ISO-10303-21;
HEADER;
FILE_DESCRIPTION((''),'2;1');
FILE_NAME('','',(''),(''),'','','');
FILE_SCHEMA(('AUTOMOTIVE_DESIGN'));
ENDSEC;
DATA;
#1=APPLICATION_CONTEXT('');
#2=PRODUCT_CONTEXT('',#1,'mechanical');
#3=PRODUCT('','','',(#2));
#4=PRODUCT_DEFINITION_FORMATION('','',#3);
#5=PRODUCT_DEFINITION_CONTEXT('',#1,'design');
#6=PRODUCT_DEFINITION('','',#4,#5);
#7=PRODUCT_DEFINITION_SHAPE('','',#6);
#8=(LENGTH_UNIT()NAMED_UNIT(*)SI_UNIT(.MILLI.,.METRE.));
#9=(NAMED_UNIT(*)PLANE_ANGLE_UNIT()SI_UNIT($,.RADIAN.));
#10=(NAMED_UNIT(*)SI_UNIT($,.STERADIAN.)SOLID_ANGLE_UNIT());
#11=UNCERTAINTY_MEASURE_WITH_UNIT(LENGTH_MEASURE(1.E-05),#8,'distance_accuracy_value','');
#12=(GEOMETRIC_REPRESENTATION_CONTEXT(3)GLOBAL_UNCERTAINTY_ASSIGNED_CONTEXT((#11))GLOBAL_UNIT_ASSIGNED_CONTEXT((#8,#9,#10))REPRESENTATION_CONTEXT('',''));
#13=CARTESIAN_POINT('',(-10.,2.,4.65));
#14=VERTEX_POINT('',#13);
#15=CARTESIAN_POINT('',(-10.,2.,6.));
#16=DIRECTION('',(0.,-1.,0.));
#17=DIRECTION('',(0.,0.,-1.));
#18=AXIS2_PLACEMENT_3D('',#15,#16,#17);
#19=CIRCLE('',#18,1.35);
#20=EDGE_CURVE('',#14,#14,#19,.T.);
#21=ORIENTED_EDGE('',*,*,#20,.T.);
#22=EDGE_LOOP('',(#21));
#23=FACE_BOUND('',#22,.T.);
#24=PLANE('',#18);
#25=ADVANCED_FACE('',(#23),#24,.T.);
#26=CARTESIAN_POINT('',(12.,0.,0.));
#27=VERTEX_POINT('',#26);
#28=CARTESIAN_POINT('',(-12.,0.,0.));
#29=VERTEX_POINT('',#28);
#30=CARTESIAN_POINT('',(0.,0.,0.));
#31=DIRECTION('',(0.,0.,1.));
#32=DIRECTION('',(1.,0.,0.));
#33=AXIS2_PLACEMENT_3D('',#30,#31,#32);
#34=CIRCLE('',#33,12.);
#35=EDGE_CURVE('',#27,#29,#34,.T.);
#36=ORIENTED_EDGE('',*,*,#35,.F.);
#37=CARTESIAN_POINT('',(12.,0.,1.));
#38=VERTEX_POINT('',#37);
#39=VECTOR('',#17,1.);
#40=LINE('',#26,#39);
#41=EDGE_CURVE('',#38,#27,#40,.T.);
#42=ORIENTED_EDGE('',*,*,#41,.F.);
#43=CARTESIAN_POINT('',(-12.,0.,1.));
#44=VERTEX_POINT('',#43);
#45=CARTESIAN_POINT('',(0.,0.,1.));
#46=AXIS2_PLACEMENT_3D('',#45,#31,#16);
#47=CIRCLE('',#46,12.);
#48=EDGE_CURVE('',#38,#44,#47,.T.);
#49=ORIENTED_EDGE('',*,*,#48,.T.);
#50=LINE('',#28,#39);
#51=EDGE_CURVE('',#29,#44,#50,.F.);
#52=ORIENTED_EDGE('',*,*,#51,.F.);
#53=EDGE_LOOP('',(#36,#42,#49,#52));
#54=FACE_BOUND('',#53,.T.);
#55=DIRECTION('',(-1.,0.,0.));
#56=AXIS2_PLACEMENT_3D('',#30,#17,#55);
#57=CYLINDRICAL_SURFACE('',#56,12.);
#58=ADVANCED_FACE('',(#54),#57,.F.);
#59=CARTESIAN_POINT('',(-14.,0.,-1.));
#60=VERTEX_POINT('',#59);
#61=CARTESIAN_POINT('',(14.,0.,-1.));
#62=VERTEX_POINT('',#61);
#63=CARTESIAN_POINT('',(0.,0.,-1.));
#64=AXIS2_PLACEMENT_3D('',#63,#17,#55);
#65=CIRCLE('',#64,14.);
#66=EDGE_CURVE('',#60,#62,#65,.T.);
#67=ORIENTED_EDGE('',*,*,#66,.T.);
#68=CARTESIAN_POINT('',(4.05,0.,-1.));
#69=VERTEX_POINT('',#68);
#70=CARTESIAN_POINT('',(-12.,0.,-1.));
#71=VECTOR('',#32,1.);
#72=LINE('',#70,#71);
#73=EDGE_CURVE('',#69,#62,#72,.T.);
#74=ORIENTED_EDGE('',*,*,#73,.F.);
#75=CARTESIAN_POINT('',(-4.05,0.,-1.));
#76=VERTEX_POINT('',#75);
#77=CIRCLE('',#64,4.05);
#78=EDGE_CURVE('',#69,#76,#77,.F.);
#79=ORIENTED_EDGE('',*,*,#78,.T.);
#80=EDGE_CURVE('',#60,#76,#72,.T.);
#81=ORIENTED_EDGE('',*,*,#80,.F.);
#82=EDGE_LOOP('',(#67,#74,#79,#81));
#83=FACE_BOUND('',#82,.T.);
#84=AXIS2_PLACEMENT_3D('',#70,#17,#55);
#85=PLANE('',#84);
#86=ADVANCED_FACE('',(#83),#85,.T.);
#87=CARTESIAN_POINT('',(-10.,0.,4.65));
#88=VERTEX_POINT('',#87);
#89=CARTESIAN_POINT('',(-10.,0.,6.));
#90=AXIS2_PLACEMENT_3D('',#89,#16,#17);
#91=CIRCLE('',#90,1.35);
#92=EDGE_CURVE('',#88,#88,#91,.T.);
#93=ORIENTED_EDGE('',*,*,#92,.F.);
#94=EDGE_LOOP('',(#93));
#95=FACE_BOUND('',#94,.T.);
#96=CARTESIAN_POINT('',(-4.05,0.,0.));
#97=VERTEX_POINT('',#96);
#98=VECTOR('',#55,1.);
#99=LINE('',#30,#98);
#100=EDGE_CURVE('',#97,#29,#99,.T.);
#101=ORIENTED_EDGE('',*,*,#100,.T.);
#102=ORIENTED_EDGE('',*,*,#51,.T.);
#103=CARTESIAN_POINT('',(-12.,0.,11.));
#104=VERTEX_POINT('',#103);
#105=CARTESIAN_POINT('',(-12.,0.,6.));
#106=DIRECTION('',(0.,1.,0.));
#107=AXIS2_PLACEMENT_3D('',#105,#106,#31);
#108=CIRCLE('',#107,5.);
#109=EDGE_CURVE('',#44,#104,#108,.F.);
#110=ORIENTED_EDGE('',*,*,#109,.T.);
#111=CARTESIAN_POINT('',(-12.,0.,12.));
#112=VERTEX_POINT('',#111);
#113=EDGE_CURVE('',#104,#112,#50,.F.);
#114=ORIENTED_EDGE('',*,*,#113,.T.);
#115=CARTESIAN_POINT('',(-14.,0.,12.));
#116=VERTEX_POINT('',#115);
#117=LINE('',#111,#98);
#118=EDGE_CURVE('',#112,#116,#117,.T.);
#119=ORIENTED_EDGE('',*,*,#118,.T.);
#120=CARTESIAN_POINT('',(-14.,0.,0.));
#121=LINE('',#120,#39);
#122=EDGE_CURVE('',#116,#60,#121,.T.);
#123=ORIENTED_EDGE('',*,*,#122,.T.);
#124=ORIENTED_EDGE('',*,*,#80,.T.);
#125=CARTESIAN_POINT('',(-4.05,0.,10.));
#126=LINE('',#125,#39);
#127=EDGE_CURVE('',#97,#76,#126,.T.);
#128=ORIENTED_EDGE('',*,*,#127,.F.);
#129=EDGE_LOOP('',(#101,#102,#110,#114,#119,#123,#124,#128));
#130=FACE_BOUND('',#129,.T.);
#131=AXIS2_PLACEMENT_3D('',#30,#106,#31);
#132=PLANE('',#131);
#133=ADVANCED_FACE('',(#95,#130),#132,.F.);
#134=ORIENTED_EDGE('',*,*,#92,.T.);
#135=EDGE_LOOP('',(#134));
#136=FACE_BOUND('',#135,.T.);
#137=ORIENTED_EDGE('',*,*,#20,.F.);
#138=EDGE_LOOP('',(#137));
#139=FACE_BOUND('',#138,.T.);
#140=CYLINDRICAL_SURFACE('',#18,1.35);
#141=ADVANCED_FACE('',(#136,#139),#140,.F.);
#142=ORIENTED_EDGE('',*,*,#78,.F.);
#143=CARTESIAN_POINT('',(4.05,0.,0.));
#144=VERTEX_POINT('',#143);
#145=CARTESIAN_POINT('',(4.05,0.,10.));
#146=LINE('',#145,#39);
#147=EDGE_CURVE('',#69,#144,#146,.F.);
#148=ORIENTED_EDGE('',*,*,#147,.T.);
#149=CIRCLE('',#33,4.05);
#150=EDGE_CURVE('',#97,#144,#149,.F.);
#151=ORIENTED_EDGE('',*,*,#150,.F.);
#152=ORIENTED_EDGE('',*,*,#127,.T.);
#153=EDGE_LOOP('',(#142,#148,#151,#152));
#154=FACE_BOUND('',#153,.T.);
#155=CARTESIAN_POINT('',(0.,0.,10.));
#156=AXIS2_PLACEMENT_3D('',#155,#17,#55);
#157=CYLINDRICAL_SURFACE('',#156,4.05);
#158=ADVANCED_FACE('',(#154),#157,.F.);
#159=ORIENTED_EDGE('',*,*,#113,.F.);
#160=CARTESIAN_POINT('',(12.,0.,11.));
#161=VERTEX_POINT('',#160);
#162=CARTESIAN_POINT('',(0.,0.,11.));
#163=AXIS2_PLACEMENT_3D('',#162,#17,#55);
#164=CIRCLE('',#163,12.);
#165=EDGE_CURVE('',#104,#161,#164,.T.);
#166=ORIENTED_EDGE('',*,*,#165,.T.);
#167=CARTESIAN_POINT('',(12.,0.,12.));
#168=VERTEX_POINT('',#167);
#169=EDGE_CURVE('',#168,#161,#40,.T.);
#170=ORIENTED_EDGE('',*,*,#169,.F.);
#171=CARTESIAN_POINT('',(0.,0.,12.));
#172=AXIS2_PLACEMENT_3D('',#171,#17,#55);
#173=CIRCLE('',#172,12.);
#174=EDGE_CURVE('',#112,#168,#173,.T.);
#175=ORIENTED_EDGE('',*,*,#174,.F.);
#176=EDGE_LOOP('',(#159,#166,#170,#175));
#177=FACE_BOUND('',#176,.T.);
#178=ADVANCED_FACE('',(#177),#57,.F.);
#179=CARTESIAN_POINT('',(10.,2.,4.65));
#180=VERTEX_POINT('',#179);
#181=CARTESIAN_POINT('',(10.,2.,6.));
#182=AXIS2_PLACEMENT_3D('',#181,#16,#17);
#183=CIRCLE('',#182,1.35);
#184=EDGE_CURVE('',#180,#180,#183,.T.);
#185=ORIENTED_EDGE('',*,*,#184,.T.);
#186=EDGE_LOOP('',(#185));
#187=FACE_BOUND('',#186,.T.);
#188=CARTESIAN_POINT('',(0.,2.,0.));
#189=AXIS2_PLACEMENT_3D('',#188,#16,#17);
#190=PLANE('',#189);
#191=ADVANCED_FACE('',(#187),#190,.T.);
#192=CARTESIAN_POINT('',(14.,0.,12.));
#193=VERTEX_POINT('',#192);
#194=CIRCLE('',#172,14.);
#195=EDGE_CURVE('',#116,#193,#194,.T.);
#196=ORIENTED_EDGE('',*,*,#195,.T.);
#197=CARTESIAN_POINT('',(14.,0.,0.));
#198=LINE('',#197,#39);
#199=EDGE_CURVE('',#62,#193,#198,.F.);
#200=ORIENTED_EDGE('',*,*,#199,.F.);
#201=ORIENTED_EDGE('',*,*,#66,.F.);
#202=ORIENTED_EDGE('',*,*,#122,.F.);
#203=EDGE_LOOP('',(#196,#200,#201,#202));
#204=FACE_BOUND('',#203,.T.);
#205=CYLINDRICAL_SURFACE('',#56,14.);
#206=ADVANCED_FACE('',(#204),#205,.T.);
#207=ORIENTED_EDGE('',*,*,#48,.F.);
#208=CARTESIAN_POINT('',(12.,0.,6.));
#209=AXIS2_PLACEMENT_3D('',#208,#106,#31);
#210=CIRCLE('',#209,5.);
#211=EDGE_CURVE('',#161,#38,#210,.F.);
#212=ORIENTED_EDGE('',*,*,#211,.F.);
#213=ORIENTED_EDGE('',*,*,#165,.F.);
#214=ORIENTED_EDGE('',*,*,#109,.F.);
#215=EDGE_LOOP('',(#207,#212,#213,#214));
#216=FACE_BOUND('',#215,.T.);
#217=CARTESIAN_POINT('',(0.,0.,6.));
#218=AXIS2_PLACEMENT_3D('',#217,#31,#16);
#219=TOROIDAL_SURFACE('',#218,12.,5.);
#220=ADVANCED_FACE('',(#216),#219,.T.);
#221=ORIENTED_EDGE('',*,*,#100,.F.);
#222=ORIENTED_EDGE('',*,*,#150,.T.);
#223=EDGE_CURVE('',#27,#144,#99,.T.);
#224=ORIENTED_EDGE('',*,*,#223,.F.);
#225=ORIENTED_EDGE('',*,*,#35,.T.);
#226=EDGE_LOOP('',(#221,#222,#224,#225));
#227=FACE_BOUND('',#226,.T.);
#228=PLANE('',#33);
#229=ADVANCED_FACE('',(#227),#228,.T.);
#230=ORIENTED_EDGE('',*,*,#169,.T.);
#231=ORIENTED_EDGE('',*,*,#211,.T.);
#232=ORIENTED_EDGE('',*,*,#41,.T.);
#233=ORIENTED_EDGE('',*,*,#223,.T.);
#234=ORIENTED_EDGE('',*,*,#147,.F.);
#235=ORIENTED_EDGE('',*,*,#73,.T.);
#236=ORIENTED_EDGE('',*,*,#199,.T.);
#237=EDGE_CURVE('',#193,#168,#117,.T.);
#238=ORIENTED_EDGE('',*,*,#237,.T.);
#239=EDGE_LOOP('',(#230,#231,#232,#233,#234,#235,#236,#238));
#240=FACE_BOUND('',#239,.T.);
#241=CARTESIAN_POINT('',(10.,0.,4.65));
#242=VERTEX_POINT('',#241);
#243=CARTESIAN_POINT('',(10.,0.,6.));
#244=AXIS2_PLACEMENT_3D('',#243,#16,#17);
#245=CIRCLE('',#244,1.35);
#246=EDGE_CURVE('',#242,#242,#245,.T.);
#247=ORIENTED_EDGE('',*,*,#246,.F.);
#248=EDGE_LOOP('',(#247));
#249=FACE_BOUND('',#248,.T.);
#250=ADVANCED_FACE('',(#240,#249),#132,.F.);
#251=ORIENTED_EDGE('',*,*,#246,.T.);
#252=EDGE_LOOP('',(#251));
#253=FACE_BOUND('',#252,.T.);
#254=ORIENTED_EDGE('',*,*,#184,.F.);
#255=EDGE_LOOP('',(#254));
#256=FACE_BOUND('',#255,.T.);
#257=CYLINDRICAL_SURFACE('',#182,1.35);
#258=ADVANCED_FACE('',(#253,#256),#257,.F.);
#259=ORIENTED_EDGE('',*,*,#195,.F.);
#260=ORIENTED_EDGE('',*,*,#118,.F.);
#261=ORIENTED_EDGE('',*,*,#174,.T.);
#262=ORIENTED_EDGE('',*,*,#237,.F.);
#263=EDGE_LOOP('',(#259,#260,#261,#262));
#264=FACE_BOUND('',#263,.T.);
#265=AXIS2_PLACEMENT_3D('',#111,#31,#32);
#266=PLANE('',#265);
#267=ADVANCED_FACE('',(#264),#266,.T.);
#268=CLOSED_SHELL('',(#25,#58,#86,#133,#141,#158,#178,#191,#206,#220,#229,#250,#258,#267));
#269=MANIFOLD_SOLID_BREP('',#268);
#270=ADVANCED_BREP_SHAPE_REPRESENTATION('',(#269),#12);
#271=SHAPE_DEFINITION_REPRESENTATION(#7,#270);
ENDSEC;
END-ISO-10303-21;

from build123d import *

# Parameters (mm, degrees)
SKETCH_1_R               = 12
EXTRUDE_1_DEPTH          = 12
OTHER_1_2_OUTLINE_R      = 12
OTHER_1_2_OUTLINE_R_2    = 5
OTHER_1_2_DEPTH          = 12
OTHER_1_3_OUTLINE_R      = 5
OTHER_1_3_OUTLINE_R_2    = 4
OTHER_1_3_DEPTH          = 4
OTHER_START              = 8
OTHER_1_4_OUTLINE_R      = 5
OTHER_1_4_OUTLINE_R_2    = 4
OTHER_1_4_DEPTH          = 4
SKETCH_2_R               = 12
EXTRUDE_2_DEPTH          = 1
SKETCH_3_W               = 2
SKETCH_3_H               = 13
SKETCH_4_R               = 1
EXTRUDE_3_DEPTH          = 4
SKETCH_5_W               = 34.262916627
SKETCH_5_H               = 20.154656839
CUT_EXTRUDE_3_DEPTH      = 24.151673806
SKETCH_6_R               = 1.35
CUT_EXTRUDE_4_DEPTH      = 2
CUT_EXTRUDE_5_DEPTH      = 10
CUT_EXTRUDE_5_DEPTH_BACK = 10
SKETCH_7_R               = 4.05


with BuildPart() as part:
    # 草图1 → 凸台-拉伸1 (new body)
    with BuildSketch(Plane.XY):
        Circle(SKETCH_1_R)
    extrude(amount=EXTRUDE_1_DEPTH)

    # Other 1 2 outline → Other 1 2 (cut)
    with BuildSketch(Plane.XY):
        Circle(OTHER_1_2_OUTLINE_R)
        Circle(OTHER_1_2_OUTLINE_R_2, mode=Mode.SUBTRACT)
    extrude(amount=OTHER_1_2_DEPTH, mode=Mode.SUBTRACT)

    # Other 1 3 outline → Other 1 3 (cut)
    with BuildSketch(Plane.XY):
        Circle(OTHER_1_3_OUTLINE_R)
        Circle(OTHER_1_3_OUTLINE_R_2, mode=Mode.SUBTRACT)
    extrude(amount=OTHER_1_3_DEPTH, mode=Mode.SUBTRACT)

    # Other 1 4 outline → Other 1 4 (cut)
    with BuildSketch(Plane.XY.offset(OTHER_START)):
        Circle(OTHER_1_4_OUTLINE_R)
        Circle(OTHER_1_4_OUTLINE_R_2, mode=Mode.SUBTRACT)
    extrude(amount=OTHER_1_4_DEPTH, mode=Mode.SUBTRACT)


with BuildPart() as body_2:
    # 型腔1: read off the stored shape, not the designer's step
    # 型腔1 outline → 型腔1 (revolve)
    with BuildSketch(Plane.XZ):
        with BuildLine():
            Line((12, 1), (12, 11))
            ThreePointArc((12, 11), (7, 6), (12, 1))
        make_face()
    revolve(axis=Axis((0, 0, 0), (0, 0, 1)))



with BuildPart() as body_2_2:
    # 草图2 → 凸台-拉伸2 (new body)
    with BuildSketch(Plane.XY):
        with Locations(Location((0, 0, 0), (0, 0, 270))):
            Circle(SKETCH_2_R)
    extrude(amount=-EXTRUDE_2_DEPTH)


with BuildPart() as body_2_1:
    add(body_2.part)

    add(body_2_2.part)  # 旋转1 merges body 2 2
    # 草图3 → 旋转1 (revolve)
    with BuildSketch(Plane(origin=(0, 0, 0), x_dir=(1, 0, 0), z_dir=(0, 1, 0))):
        with Locations((-13, -5.5)):
            Rectangle(SKETCH_3_W, SKETCH_3_H)
    revolve(axis=Axis((0, 0, 0), (0, 0, 1)))

    # 草图4 → 凸台-拉伸3 (add)
    with BuildSketch(Plane.XY):
        Circle(SKETCH_4_R)
    extrude(amount=EXTRUDE_3_DEPTH)

    # 草图5 → 切除-拉伸3 (cut, through all)
    with BuildSketch(Plane(origin=(0, 0, 0), x_dir=(1, 0, 0), z_dir=(0, 1, 0))):
        with Locations((0.6382308, -6.140467699)):
            Rectangle(SKETCH_5_W, SKETCH_5_H)
    extrude(amount=-CUT_EXTRUDE_3_DEPTH, mode=Mode.SUBTRACT)

    # 草图6 → 切除-拉伸4 (cut)
    with BuildSketch(Plane.XZ):
        with Locations(Location((10, 6, 0), (0, 0, 270))):
            Circle(SKETCH_6_R)
        with Locations(Location((-10, 6, 0), (0, 0, 270))):
            Circle(SKETCH_6_R)
    extrude(amount=-CUT_EXTRUDE_4_DEPTH, mode=Mode.SUBTRACT)

    # 草图7 → 切除-拉伸5 (cut, two sides: drawn at the far end of the back side and taken through both)
    with BuildSketch(Plane.XY.offset(-CUT_EXTRUDE_5_DEPTH_BACK)):
        Circle(SKETCH_7_R)
    extrude(amount=CUT_EXTRUDE_5_DEPTH + CUT_EXTRUDE_5_DEPTH_BACK, mode=Mode.SUBTRACT)


solid = body_2_1.part
